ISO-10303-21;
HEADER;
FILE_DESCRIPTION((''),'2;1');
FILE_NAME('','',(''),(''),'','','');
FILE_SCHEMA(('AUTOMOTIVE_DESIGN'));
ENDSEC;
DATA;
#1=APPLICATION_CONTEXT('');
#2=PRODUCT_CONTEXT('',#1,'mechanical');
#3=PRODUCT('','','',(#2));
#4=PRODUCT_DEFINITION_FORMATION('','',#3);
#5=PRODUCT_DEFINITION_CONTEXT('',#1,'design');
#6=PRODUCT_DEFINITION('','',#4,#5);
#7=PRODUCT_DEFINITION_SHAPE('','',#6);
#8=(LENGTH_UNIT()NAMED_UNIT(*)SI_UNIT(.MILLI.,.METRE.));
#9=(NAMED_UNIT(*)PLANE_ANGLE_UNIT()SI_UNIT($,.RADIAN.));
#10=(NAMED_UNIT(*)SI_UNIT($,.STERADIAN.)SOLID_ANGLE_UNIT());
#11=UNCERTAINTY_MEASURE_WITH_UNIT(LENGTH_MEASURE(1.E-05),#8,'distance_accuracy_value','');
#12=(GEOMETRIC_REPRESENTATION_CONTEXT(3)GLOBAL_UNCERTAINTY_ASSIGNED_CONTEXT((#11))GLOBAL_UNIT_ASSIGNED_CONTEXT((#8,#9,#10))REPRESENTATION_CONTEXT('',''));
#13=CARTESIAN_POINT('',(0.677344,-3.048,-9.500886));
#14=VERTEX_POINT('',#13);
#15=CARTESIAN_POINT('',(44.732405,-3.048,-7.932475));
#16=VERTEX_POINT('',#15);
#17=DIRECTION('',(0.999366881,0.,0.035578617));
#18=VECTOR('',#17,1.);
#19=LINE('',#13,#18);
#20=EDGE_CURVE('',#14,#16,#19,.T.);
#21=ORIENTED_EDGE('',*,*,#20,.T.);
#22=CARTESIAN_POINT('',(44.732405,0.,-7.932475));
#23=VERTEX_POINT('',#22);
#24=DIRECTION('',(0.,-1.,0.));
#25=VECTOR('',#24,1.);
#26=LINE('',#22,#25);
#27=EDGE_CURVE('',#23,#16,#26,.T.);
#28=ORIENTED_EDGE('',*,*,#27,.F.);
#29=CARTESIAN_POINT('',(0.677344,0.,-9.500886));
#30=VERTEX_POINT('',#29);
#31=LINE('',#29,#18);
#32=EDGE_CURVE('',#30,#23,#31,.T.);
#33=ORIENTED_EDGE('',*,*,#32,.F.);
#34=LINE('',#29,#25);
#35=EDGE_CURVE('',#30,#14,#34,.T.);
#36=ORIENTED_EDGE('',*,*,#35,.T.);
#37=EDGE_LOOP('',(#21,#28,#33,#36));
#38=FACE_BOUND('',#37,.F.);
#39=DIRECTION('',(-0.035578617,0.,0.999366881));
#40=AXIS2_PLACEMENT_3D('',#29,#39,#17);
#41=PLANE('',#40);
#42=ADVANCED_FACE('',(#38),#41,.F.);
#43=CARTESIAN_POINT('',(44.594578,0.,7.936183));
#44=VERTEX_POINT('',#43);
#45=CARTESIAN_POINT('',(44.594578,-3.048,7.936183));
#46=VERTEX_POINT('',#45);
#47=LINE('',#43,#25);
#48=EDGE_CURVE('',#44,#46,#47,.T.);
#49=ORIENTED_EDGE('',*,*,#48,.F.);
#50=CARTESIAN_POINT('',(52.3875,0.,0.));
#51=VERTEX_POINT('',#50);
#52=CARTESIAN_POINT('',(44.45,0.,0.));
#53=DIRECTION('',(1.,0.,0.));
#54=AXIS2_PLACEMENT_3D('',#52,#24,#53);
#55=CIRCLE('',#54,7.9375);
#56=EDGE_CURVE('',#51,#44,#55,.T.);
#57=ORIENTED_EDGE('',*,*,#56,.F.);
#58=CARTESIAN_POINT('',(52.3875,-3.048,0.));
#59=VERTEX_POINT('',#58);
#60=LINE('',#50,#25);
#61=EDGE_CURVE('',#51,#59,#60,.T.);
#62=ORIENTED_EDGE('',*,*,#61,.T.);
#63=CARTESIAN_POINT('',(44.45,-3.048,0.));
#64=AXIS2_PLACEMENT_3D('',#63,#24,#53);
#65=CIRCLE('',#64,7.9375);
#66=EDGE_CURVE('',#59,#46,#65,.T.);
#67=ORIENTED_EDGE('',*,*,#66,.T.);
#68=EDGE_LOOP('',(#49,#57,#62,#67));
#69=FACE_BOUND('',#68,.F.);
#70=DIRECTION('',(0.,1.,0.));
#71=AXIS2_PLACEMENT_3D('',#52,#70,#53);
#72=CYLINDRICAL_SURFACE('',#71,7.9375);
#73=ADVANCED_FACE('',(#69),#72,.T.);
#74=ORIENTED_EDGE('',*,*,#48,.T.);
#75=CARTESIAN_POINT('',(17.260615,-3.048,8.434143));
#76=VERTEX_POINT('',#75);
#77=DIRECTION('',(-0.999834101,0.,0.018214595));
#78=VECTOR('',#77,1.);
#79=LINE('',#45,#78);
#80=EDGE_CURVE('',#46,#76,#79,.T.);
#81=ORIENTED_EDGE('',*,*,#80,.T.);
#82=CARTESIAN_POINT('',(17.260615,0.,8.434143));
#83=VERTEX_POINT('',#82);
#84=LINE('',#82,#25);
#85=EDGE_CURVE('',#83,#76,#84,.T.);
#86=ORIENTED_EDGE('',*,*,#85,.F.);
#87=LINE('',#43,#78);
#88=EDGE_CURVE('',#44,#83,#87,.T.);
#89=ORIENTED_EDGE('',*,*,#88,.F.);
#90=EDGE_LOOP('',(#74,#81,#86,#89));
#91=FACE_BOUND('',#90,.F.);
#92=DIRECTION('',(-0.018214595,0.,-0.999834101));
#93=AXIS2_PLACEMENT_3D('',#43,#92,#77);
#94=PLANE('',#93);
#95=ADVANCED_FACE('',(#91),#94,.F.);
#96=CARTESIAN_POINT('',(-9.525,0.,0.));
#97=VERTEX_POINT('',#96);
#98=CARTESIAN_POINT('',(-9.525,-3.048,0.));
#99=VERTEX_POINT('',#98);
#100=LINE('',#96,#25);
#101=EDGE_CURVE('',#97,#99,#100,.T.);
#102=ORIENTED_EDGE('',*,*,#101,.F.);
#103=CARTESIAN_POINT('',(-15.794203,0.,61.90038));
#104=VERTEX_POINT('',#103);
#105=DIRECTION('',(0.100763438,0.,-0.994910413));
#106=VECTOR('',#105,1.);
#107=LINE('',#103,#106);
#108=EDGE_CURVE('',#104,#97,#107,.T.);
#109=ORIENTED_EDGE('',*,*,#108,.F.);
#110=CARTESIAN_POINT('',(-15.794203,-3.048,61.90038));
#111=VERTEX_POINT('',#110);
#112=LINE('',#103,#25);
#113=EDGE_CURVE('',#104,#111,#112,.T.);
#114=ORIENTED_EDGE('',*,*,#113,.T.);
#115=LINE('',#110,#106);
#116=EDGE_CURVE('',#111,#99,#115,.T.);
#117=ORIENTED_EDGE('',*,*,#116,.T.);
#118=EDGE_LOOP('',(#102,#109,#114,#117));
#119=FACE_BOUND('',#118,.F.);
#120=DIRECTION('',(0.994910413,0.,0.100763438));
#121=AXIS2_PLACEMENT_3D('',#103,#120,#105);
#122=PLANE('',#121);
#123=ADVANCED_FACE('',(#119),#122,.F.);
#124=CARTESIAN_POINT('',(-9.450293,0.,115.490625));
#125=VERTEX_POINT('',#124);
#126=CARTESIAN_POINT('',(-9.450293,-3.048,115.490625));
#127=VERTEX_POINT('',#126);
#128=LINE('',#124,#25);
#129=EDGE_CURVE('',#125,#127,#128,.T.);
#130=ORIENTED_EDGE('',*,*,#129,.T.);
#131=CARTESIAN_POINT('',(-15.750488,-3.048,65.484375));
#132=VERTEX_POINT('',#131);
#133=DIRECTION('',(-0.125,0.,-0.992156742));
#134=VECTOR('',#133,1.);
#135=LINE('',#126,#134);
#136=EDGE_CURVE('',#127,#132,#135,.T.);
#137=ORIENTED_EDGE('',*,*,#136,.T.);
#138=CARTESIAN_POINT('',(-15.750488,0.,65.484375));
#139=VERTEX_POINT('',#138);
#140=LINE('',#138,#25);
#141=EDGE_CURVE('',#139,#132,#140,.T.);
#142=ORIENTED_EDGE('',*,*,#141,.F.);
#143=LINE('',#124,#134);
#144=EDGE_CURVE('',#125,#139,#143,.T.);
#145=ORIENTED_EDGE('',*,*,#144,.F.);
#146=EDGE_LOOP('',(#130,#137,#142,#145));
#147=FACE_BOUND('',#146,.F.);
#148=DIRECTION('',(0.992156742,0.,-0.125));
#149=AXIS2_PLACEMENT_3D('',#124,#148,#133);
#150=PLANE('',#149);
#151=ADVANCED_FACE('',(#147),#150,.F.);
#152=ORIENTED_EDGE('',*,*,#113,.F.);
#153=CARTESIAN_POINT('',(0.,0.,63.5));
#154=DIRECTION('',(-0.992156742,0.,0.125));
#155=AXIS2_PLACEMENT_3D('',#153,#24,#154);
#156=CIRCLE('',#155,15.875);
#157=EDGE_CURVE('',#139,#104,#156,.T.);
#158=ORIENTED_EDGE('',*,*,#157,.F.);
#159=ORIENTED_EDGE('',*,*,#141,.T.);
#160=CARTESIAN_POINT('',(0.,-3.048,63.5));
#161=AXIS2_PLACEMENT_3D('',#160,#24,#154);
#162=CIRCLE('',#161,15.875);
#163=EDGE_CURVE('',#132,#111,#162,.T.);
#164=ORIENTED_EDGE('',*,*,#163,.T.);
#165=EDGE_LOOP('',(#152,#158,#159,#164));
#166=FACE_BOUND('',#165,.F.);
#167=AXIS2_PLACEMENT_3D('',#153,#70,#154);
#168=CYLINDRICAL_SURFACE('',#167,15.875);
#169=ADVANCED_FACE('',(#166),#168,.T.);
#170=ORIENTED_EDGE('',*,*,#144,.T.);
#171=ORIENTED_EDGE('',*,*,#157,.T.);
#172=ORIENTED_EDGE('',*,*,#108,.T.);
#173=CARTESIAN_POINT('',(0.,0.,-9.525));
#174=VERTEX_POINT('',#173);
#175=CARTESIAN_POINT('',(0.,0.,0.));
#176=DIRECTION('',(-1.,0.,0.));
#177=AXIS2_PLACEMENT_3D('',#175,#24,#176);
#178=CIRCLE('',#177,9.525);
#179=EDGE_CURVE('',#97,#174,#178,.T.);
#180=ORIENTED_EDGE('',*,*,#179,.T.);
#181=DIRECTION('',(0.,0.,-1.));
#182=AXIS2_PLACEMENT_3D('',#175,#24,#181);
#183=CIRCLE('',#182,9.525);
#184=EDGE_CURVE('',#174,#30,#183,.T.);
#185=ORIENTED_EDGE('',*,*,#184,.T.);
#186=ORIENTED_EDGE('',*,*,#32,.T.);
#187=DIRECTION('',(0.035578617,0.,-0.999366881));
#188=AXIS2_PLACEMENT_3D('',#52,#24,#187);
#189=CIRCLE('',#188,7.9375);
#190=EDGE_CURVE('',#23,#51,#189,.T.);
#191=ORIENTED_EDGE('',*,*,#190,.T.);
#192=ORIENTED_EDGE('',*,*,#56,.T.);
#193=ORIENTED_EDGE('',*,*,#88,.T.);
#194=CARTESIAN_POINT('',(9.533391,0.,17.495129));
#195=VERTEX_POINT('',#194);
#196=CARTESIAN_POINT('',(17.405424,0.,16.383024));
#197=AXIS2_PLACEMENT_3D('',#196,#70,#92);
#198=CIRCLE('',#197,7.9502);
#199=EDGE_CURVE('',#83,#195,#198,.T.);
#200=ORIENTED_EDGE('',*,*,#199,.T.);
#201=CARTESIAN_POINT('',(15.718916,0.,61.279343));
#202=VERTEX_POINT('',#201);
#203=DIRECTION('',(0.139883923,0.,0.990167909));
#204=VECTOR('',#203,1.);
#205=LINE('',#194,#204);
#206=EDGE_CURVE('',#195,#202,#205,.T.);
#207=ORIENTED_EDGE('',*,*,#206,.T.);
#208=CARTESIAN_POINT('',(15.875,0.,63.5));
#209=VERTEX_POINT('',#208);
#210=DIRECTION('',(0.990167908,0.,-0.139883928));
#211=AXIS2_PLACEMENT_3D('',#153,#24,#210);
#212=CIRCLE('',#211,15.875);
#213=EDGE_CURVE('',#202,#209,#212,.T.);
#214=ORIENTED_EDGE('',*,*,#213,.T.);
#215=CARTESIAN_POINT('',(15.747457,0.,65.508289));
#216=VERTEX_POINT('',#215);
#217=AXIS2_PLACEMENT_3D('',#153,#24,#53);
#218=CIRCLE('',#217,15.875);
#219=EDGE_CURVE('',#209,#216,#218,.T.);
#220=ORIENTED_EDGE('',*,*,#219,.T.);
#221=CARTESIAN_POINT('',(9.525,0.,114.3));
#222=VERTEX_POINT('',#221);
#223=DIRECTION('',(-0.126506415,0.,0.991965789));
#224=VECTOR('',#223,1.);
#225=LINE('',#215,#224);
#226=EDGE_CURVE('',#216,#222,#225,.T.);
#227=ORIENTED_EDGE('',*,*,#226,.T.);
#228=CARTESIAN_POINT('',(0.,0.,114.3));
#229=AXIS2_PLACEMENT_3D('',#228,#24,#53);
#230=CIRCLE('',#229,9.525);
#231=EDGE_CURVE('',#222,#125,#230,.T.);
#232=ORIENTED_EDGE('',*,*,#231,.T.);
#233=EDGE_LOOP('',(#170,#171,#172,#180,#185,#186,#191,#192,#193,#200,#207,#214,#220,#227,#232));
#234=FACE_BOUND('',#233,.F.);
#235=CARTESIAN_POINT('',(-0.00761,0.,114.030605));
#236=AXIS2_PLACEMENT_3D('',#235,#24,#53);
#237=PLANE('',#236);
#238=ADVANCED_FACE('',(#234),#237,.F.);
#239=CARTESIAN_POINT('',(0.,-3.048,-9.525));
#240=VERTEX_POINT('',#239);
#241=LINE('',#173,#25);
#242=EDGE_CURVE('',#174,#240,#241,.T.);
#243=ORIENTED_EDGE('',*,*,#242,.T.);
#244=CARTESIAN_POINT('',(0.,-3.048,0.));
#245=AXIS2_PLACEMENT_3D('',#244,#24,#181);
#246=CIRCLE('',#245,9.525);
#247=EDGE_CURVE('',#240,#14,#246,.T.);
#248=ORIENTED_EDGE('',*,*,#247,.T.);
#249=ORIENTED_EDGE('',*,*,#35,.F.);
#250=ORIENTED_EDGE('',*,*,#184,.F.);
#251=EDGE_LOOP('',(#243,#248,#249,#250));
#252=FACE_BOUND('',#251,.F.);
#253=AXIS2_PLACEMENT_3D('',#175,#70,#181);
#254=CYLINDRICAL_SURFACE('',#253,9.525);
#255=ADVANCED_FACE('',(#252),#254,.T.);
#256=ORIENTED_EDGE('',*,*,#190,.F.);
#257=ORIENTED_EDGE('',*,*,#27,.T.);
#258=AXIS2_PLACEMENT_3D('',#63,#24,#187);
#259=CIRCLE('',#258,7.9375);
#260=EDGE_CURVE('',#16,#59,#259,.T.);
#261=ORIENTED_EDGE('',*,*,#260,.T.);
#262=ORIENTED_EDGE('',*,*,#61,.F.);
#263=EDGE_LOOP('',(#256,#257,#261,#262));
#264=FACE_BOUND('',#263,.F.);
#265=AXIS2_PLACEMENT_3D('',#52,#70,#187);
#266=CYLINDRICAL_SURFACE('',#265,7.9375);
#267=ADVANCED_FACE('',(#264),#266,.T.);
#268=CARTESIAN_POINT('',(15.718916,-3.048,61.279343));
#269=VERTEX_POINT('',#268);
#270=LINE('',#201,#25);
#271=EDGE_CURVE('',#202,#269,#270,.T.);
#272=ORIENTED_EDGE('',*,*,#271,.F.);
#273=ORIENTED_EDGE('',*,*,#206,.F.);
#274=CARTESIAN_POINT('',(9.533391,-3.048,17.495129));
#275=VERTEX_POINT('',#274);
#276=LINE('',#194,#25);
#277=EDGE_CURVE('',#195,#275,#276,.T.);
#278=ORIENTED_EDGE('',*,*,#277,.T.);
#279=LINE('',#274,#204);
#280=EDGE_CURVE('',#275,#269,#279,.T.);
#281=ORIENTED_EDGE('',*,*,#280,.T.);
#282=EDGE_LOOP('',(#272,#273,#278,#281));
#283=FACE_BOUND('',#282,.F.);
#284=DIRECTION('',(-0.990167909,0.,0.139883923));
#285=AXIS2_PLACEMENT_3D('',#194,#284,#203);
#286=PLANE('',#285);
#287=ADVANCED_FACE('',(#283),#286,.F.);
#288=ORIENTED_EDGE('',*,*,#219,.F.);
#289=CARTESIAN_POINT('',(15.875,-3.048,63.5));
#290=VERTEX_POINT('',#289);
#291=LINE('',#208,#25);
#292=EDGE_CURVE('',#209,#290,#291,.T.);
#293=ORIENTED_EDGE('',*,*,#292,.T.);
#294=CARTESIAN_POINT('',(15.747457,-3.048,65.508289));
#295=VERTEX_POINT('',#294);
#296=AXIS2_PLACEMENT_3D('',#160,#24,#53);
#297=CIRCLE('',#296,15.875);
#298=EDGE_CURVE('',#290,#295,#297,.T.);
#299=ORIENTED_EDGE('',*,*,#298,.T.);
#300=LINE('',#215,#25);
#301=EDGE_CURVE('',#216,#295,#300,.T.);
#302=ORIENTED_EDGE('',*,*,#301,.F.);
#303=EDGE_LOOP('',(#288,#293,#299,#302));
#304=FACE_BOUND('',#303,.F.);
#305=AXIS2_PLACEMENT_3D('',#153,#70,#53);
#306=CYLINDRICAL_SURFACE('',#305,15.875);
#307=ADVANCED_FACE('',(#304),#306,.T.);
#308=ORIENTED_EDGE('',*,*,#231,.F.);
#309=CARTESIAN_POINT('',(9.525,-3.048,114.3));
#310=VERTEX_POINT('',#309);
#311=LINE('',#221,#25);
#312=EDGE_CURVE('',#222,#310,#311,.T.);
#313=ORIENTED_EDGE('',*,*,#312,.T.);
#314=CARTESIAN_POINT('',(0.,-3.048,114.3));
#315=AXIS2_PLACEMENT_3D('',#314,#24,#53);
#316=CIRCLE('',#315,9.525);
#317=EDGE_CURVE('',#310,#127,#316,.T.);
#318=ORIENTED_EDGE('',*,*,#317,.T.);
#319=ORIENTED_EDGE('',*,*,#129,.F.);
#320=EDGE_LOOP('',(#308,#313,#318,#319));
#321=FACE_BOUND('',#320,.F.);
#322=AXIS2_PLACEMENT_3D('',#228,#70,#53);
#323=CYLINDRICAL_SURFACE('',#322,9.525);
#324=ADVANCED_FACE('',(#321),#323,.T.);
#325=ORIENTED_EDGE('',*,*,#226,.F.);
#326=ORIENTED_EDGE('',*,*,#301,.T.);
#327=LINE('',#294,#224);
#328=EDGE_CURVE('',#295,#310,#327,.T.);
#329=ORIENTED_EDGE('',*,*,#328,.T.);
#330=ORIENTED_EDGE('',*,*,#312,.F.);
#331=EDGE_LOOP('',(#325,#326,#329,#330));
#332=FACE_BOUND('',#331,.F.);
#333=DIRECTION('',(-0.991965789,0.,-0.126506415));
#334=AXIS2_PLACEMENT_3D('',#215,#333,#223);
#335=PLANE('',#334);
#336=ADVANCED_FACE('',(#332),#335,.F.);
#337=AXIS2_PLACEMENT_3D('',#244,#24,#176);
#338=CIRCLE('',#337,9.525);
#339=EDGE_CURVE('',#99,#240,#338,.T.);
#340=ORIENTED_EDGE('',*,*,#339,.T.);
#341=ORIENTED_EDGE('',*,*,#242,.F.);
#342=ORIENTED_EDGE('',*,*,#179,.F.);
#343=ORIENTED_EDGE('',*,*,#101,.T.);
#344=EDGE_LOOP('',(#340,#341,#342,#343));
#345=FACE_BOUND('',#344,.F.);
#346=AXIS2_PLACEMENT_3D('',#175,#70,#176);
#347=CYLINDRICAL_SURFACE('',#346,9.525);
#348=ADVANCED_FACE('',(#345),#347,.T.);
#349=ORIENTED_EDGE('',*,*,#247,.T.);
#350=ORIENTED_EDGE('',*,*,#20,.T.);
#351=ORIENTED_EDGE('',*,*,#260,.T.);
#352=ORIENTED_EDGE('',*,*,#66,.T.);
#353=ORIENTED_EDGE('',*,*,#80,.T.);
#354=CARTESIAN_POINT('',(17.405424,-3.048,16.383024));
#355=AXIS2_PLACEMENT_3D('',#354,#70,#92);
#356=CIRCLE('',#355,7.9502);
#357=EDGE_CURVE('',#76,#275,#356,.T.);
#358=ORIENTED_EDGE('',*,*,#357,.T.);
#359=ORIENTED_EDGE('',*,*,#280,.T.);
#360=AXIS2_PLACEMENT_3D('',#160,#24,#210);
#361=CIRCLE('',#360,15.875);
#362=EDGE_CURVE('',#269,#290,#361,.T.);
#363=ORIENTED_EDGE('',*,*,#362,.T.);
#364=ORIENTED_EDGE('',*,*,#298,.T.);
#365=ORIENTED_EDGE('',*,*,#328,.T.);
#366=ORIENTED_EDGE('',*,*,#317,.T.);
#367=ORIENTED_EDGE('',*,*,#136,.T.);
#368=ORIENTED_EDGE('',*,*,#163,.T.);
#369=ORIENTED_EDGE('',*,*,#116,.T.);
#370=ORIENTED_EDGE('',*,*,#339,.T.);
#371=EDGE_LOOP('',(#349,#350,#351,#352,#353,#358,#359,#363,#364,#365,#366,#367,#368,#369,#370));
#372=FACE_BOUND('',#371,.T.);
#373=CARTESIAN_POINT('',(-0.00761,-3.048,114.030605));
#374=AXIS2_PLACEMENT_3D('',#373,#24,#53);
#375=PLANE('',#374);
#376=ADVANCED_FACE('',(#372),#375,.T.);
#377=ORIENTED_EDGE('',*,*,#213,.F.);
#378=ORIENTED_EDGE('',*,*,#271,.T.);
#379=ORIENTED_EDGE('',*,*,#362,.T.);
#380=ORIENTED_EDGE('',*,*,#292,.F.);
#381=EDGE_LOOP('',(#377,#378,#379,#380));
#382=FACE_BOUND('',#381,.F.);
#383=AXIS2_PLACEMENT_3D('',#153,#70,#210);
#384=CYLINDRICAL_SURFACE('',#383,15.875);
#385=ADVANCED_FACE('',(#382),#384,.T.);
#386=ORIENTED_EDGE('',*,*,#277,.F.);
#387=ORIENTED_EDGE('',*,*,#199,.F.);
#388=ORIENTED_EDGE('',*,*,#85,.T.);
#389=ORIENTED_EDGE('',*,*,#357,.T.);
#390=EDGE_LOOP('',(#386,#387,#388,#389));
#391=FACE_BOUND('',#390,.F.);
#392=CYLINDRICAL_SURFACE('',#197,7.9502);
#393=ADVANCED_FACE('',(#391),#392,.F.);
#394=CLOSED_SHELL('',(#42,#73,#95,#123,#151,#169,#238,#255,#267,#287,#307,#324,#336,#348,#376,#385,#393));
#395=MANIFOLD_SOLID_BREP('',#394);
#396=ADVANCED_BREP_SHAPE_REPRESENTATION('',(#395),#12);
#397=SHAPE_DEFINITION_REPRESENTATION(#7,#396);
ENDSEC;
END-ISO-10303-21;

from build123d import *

# Parameters (mm, degrees)
F0_R     = 3.175
F1_DEPTH = 3.048


with BuildPart() as f1:
    # F0 (on Front) → F1 (new body)
    with BuildSketch(Plane.XZ):
        with BuildLine():
            ThreePointArc((9.525, 114.3), (0.596483242, 123.8063048942), (-9.4502929642, 115.490625))
            ThreePointArc((-9.4502929642, 115.490625), (-7.14375, 107.9998046905), (0, 104.775))
            ThreePointArc((0, 104.775), (6.7351920908, 107.5648079092), (9.525, 114.3))
        make_face()
        with BuildLine():
            ThreePointArc((3.175, 114.3), (2.2450640303, 112.0549359697), (0, 111.125))
            ThreePointArc((0, 111.125), (-2.2450640303, 116.5450640303), (3.175, 114.3))
        make_face(mode=Mode.SUBTRACT)
        with BuildLine():
            Line((0, 47.625), (0, 9.525))
            ThreePointArc((0, 9.525), (6.7351920908, 6.7351920908), (9.525, 0))
            Line((9.525, 0), (36.5125, 0))
            ThreePointArc((36.5125, 0), (38.8886909991, 5.663545572), (44.5945783487, 7.9361831727))
            Line((44.5945783487, 7.9361831727), (17.2606145929, 8.4341428668))
            ThreePointArc((17.2606145929, 8.4341428668), (11.3562252192, 11.224257518), (9.5333913565, 17.4951290964))
            Line((9.5333913565, 17.4951290964), (15.7189155447, 61.2793426425))
            ThreePointArc((15.7189155447, 61.2793426425), (10.4106361345, 51.5152480094), (0, 47.625))
        make_face()
        with BuildLine():
            ThreePointArc((-15.7942028036, 61.9003804205), (-10.644756084, 51.722700101), (0, 47.625))
            Line((0, 47.625), (0, 60.325))
            ThreePointArc((0, 60.325), (-3.175, 63.5), (0, 66.675))
            Line((0, 66.675), (0, 79.375))
            ThreePointArc((0, 79.375), (-10.5003255158, 75.40625), (-15.7504882737, 65.484375))
            ThreePointArc((-15.7504882737, 65.484375), (-15.8738192656, 63.6936154008), (-15.7942028036, 61.9003804205))
        make_face()
        with BuildLine():
            Line((0, 100.0252), (0, 79.375))
            ThreePointArc((0, 79.375), (10.4912828548, 75.4142187767), (15.7474569047, 65.5082893304))
            Line((15.7474569047, 65.5082893304), (9.525, 114.3))
            ThreePointArc((9.525, 114.3), (6.7351920908, 107.5648079092), (0, 104.775))
            Line((0, 104.775), (0, 100.0252))
        make_face()
        with BuildLine():
            ThreePointArc((44.5945783487, 7.9361831727), (38.8886909991, 5.663545572), (36.5125, 0))
            ThreePointArc((36.5125, 0), (38.9380895153, -5.7116327839), (44.7324052746, -7.9324746146))
            ThreePointArc((44.7324052746, -7.9324746146), (50.1616327839, -5.5119104847), (52.3875, 0))
            ThreePointArc((52.3875, 0), (50.113545572, 5.5613090009), (44.5945783487, 7.9361831727))
        make_face()
        with BuildLine():
            ThreePointArc((47.625, 0), (44.45, -3.175), (41.275, 0))
            ThreePointArc((41.275, 0), (44.45, 3.175), (47.625, 0))
        make_face(mode=Mode.SUBTRACT)
        with BuildLine():
            Line((-9.4502929642, 115.490625), (-15.7504882737, 65.484375))
            ThreePointArc((-15.7504882737, 65.484375), (-10.5003255158, 75.40625), (0, 79.375))
            Line((0, 79.375), (0, 100.0252))
            Line((0, 100.0252), (0, 104.775))
            ThreePointArc((0, 104.775), (-7.14375, 107.9998046905), (-9.4502929642, 115.490625))
        make_face()
        with Locations((-3.175, 100.0252)):
            Circle(F0_R, mode=Mode.SUBTRACT)
        with BuildLine():
            Line((0, 60.325), (0, 47.625))
            ThreePointArc((0, 47.625), (10.4106361345, 51.5152480094), (15.7189155447, 61.2793426425))
            ThreePointArc((15.7189155447, 61.2793426425), (15.8359308105, 62.3869320038), (15.875, 63.5))
            ThreePointArc((15.875, 63.5), (15.8430821396, 64.5061676396), (15.7474569047, 65.5082893304))
            ThreePointArc((15.7474569047, 65.5082893304), (10.4912828548, 75.4142187767), (0, 79.375))
            Line((0, 79.375), (0, 66.675))
            ThreePointArc((0, 66.675), (2.2450640303, 65.7450640303), (3.175, 63.5))
            ThreePointArc((3.175, 63.5), (2.2450640303, 61.2549359697), (0, 60.325))
        make_face()
        with BuildLine():
            ThreePointArc((3.175, 0), (-2.2450640303, -2.2450640303), (0, 3.175))
            Line((0, 3.175), (0, 9.525))
            ThreePointArc((0, 9.525), (-6.7351920908, 6.7351920908), (-9.525, 0))
            ThreePointArc((-9.525, 0), (-6.7351920908, -6.7351920908), (0, -9.525))
            Line((0, -9.525), (0.6773435479, -9.500885786))
            ThreePointArc((0.6773435479, -9.500885786), (6.9705567315, -6.4912990883), (9.525, 0))
            Line((9.525, 0), (3.175, 0))
        make_face()
        with BuildLine():
            Line((36.5125, 0), (9.525, 0))
            ThreePointArc((9.525, 0), (6.9705567315, -6.4912990883), (0.6773435479, -9.500885786))
            Line((0.6773435479, -9.500885786), (44.7324052746, -7.9324746146))
            ThreePointArc((44.7324052746, -7.9324746146), (38.9380895153, -5.7116327839), (36.5125, 0))
        make_face()
        with BuildLine():
            ThreePointArc((-9.525, 0), (-6.7351920908, 6.7351920908), (0, 9.525))
            Line((0, 9.525), (0, 47.625))
            ThreePointArc((0, 47.625), (-10.644756084, 51.722700101), (-15.7942028036, 61.9003804205))
            Line((-15.7942028036, 61.9003804205), (-9.525, 0))
        make_face()
        with BuildLine():
            Line((0, 9.525), (0, 3.175))
            ThreePointArc((0, 3.175), (2.2450640303, 2.2450640303), (3.175, 0))
            Line((3.175, 0), (9.525, 0))
            ThreePointArc((9.525, 0), (6.7351920908, 6.7351920908), (0, 9.525))
        make_face()
        with BuildLine():
            ThreePointArc((0, -9.525), (0.3388863295, -9.5189695375), (0.6773435479, -9.500885786))
            Line((0.6773435479, -9.500885786), (0, -9.525))
        make_face()
        with BuildLine():
            ThreePointArc((3.175, 114.3), (-2.2450640303, 116.5450640303), (0, 111.125))
            ThreePointArc((0, 111.125), (2.2450640303, 112.0549359697), (3.175, 114.3))
        make_face()
        with BuildLine():
            ThreePointArc((47.625, 0), (44.45, 3.175), (41.275, 0))
            ThreePointArc((41.275, 0), (44.45, -3.175), (47.625, 0))
        make_face()
        with Locations((-3.175, 100.0252)):
            Circle(F0_R)
        with BuildLine():
            ThreePointArc((0, 66.675), (-3.175, 63.5), (0, 60.325))
            Line((0, 60.325), (0, 63.5))
            Line((0, 63.5), (0, 66.675))
        make_face()
        with BuildLine():
            Line((0, 63.5), (0, 60.325))
            ThreePointArc((0, 60.325), (2.2450640303, 61.2549359697), (3.175, 63.5))
            ThreePointArc((3.175, 63.5), (2.2450640303, 65.7450640303), (0, 66.675))
            Line((0, 66.675), (0, 63.5))
        make_face()
        with BuildLine():
            Line((0, 3.175), (0, 0))
            Line((0, 0), (3.175, 0))
            ThreePointArc((3.175, 0), (2.2450640303, 2.2450640303), (0, 3.175))
        make_face()
        with BuildLine():
            Line((3.175, 0), (0, 0))
            Line((0, 0), (0, 3.175))
            ThreePointArc((0, 3.175), (-2.2450640303, -2.2450640303), (3.175, 0))
        make_face()
    extrude(amount=F1_DEPTH)


solid = f1.part
